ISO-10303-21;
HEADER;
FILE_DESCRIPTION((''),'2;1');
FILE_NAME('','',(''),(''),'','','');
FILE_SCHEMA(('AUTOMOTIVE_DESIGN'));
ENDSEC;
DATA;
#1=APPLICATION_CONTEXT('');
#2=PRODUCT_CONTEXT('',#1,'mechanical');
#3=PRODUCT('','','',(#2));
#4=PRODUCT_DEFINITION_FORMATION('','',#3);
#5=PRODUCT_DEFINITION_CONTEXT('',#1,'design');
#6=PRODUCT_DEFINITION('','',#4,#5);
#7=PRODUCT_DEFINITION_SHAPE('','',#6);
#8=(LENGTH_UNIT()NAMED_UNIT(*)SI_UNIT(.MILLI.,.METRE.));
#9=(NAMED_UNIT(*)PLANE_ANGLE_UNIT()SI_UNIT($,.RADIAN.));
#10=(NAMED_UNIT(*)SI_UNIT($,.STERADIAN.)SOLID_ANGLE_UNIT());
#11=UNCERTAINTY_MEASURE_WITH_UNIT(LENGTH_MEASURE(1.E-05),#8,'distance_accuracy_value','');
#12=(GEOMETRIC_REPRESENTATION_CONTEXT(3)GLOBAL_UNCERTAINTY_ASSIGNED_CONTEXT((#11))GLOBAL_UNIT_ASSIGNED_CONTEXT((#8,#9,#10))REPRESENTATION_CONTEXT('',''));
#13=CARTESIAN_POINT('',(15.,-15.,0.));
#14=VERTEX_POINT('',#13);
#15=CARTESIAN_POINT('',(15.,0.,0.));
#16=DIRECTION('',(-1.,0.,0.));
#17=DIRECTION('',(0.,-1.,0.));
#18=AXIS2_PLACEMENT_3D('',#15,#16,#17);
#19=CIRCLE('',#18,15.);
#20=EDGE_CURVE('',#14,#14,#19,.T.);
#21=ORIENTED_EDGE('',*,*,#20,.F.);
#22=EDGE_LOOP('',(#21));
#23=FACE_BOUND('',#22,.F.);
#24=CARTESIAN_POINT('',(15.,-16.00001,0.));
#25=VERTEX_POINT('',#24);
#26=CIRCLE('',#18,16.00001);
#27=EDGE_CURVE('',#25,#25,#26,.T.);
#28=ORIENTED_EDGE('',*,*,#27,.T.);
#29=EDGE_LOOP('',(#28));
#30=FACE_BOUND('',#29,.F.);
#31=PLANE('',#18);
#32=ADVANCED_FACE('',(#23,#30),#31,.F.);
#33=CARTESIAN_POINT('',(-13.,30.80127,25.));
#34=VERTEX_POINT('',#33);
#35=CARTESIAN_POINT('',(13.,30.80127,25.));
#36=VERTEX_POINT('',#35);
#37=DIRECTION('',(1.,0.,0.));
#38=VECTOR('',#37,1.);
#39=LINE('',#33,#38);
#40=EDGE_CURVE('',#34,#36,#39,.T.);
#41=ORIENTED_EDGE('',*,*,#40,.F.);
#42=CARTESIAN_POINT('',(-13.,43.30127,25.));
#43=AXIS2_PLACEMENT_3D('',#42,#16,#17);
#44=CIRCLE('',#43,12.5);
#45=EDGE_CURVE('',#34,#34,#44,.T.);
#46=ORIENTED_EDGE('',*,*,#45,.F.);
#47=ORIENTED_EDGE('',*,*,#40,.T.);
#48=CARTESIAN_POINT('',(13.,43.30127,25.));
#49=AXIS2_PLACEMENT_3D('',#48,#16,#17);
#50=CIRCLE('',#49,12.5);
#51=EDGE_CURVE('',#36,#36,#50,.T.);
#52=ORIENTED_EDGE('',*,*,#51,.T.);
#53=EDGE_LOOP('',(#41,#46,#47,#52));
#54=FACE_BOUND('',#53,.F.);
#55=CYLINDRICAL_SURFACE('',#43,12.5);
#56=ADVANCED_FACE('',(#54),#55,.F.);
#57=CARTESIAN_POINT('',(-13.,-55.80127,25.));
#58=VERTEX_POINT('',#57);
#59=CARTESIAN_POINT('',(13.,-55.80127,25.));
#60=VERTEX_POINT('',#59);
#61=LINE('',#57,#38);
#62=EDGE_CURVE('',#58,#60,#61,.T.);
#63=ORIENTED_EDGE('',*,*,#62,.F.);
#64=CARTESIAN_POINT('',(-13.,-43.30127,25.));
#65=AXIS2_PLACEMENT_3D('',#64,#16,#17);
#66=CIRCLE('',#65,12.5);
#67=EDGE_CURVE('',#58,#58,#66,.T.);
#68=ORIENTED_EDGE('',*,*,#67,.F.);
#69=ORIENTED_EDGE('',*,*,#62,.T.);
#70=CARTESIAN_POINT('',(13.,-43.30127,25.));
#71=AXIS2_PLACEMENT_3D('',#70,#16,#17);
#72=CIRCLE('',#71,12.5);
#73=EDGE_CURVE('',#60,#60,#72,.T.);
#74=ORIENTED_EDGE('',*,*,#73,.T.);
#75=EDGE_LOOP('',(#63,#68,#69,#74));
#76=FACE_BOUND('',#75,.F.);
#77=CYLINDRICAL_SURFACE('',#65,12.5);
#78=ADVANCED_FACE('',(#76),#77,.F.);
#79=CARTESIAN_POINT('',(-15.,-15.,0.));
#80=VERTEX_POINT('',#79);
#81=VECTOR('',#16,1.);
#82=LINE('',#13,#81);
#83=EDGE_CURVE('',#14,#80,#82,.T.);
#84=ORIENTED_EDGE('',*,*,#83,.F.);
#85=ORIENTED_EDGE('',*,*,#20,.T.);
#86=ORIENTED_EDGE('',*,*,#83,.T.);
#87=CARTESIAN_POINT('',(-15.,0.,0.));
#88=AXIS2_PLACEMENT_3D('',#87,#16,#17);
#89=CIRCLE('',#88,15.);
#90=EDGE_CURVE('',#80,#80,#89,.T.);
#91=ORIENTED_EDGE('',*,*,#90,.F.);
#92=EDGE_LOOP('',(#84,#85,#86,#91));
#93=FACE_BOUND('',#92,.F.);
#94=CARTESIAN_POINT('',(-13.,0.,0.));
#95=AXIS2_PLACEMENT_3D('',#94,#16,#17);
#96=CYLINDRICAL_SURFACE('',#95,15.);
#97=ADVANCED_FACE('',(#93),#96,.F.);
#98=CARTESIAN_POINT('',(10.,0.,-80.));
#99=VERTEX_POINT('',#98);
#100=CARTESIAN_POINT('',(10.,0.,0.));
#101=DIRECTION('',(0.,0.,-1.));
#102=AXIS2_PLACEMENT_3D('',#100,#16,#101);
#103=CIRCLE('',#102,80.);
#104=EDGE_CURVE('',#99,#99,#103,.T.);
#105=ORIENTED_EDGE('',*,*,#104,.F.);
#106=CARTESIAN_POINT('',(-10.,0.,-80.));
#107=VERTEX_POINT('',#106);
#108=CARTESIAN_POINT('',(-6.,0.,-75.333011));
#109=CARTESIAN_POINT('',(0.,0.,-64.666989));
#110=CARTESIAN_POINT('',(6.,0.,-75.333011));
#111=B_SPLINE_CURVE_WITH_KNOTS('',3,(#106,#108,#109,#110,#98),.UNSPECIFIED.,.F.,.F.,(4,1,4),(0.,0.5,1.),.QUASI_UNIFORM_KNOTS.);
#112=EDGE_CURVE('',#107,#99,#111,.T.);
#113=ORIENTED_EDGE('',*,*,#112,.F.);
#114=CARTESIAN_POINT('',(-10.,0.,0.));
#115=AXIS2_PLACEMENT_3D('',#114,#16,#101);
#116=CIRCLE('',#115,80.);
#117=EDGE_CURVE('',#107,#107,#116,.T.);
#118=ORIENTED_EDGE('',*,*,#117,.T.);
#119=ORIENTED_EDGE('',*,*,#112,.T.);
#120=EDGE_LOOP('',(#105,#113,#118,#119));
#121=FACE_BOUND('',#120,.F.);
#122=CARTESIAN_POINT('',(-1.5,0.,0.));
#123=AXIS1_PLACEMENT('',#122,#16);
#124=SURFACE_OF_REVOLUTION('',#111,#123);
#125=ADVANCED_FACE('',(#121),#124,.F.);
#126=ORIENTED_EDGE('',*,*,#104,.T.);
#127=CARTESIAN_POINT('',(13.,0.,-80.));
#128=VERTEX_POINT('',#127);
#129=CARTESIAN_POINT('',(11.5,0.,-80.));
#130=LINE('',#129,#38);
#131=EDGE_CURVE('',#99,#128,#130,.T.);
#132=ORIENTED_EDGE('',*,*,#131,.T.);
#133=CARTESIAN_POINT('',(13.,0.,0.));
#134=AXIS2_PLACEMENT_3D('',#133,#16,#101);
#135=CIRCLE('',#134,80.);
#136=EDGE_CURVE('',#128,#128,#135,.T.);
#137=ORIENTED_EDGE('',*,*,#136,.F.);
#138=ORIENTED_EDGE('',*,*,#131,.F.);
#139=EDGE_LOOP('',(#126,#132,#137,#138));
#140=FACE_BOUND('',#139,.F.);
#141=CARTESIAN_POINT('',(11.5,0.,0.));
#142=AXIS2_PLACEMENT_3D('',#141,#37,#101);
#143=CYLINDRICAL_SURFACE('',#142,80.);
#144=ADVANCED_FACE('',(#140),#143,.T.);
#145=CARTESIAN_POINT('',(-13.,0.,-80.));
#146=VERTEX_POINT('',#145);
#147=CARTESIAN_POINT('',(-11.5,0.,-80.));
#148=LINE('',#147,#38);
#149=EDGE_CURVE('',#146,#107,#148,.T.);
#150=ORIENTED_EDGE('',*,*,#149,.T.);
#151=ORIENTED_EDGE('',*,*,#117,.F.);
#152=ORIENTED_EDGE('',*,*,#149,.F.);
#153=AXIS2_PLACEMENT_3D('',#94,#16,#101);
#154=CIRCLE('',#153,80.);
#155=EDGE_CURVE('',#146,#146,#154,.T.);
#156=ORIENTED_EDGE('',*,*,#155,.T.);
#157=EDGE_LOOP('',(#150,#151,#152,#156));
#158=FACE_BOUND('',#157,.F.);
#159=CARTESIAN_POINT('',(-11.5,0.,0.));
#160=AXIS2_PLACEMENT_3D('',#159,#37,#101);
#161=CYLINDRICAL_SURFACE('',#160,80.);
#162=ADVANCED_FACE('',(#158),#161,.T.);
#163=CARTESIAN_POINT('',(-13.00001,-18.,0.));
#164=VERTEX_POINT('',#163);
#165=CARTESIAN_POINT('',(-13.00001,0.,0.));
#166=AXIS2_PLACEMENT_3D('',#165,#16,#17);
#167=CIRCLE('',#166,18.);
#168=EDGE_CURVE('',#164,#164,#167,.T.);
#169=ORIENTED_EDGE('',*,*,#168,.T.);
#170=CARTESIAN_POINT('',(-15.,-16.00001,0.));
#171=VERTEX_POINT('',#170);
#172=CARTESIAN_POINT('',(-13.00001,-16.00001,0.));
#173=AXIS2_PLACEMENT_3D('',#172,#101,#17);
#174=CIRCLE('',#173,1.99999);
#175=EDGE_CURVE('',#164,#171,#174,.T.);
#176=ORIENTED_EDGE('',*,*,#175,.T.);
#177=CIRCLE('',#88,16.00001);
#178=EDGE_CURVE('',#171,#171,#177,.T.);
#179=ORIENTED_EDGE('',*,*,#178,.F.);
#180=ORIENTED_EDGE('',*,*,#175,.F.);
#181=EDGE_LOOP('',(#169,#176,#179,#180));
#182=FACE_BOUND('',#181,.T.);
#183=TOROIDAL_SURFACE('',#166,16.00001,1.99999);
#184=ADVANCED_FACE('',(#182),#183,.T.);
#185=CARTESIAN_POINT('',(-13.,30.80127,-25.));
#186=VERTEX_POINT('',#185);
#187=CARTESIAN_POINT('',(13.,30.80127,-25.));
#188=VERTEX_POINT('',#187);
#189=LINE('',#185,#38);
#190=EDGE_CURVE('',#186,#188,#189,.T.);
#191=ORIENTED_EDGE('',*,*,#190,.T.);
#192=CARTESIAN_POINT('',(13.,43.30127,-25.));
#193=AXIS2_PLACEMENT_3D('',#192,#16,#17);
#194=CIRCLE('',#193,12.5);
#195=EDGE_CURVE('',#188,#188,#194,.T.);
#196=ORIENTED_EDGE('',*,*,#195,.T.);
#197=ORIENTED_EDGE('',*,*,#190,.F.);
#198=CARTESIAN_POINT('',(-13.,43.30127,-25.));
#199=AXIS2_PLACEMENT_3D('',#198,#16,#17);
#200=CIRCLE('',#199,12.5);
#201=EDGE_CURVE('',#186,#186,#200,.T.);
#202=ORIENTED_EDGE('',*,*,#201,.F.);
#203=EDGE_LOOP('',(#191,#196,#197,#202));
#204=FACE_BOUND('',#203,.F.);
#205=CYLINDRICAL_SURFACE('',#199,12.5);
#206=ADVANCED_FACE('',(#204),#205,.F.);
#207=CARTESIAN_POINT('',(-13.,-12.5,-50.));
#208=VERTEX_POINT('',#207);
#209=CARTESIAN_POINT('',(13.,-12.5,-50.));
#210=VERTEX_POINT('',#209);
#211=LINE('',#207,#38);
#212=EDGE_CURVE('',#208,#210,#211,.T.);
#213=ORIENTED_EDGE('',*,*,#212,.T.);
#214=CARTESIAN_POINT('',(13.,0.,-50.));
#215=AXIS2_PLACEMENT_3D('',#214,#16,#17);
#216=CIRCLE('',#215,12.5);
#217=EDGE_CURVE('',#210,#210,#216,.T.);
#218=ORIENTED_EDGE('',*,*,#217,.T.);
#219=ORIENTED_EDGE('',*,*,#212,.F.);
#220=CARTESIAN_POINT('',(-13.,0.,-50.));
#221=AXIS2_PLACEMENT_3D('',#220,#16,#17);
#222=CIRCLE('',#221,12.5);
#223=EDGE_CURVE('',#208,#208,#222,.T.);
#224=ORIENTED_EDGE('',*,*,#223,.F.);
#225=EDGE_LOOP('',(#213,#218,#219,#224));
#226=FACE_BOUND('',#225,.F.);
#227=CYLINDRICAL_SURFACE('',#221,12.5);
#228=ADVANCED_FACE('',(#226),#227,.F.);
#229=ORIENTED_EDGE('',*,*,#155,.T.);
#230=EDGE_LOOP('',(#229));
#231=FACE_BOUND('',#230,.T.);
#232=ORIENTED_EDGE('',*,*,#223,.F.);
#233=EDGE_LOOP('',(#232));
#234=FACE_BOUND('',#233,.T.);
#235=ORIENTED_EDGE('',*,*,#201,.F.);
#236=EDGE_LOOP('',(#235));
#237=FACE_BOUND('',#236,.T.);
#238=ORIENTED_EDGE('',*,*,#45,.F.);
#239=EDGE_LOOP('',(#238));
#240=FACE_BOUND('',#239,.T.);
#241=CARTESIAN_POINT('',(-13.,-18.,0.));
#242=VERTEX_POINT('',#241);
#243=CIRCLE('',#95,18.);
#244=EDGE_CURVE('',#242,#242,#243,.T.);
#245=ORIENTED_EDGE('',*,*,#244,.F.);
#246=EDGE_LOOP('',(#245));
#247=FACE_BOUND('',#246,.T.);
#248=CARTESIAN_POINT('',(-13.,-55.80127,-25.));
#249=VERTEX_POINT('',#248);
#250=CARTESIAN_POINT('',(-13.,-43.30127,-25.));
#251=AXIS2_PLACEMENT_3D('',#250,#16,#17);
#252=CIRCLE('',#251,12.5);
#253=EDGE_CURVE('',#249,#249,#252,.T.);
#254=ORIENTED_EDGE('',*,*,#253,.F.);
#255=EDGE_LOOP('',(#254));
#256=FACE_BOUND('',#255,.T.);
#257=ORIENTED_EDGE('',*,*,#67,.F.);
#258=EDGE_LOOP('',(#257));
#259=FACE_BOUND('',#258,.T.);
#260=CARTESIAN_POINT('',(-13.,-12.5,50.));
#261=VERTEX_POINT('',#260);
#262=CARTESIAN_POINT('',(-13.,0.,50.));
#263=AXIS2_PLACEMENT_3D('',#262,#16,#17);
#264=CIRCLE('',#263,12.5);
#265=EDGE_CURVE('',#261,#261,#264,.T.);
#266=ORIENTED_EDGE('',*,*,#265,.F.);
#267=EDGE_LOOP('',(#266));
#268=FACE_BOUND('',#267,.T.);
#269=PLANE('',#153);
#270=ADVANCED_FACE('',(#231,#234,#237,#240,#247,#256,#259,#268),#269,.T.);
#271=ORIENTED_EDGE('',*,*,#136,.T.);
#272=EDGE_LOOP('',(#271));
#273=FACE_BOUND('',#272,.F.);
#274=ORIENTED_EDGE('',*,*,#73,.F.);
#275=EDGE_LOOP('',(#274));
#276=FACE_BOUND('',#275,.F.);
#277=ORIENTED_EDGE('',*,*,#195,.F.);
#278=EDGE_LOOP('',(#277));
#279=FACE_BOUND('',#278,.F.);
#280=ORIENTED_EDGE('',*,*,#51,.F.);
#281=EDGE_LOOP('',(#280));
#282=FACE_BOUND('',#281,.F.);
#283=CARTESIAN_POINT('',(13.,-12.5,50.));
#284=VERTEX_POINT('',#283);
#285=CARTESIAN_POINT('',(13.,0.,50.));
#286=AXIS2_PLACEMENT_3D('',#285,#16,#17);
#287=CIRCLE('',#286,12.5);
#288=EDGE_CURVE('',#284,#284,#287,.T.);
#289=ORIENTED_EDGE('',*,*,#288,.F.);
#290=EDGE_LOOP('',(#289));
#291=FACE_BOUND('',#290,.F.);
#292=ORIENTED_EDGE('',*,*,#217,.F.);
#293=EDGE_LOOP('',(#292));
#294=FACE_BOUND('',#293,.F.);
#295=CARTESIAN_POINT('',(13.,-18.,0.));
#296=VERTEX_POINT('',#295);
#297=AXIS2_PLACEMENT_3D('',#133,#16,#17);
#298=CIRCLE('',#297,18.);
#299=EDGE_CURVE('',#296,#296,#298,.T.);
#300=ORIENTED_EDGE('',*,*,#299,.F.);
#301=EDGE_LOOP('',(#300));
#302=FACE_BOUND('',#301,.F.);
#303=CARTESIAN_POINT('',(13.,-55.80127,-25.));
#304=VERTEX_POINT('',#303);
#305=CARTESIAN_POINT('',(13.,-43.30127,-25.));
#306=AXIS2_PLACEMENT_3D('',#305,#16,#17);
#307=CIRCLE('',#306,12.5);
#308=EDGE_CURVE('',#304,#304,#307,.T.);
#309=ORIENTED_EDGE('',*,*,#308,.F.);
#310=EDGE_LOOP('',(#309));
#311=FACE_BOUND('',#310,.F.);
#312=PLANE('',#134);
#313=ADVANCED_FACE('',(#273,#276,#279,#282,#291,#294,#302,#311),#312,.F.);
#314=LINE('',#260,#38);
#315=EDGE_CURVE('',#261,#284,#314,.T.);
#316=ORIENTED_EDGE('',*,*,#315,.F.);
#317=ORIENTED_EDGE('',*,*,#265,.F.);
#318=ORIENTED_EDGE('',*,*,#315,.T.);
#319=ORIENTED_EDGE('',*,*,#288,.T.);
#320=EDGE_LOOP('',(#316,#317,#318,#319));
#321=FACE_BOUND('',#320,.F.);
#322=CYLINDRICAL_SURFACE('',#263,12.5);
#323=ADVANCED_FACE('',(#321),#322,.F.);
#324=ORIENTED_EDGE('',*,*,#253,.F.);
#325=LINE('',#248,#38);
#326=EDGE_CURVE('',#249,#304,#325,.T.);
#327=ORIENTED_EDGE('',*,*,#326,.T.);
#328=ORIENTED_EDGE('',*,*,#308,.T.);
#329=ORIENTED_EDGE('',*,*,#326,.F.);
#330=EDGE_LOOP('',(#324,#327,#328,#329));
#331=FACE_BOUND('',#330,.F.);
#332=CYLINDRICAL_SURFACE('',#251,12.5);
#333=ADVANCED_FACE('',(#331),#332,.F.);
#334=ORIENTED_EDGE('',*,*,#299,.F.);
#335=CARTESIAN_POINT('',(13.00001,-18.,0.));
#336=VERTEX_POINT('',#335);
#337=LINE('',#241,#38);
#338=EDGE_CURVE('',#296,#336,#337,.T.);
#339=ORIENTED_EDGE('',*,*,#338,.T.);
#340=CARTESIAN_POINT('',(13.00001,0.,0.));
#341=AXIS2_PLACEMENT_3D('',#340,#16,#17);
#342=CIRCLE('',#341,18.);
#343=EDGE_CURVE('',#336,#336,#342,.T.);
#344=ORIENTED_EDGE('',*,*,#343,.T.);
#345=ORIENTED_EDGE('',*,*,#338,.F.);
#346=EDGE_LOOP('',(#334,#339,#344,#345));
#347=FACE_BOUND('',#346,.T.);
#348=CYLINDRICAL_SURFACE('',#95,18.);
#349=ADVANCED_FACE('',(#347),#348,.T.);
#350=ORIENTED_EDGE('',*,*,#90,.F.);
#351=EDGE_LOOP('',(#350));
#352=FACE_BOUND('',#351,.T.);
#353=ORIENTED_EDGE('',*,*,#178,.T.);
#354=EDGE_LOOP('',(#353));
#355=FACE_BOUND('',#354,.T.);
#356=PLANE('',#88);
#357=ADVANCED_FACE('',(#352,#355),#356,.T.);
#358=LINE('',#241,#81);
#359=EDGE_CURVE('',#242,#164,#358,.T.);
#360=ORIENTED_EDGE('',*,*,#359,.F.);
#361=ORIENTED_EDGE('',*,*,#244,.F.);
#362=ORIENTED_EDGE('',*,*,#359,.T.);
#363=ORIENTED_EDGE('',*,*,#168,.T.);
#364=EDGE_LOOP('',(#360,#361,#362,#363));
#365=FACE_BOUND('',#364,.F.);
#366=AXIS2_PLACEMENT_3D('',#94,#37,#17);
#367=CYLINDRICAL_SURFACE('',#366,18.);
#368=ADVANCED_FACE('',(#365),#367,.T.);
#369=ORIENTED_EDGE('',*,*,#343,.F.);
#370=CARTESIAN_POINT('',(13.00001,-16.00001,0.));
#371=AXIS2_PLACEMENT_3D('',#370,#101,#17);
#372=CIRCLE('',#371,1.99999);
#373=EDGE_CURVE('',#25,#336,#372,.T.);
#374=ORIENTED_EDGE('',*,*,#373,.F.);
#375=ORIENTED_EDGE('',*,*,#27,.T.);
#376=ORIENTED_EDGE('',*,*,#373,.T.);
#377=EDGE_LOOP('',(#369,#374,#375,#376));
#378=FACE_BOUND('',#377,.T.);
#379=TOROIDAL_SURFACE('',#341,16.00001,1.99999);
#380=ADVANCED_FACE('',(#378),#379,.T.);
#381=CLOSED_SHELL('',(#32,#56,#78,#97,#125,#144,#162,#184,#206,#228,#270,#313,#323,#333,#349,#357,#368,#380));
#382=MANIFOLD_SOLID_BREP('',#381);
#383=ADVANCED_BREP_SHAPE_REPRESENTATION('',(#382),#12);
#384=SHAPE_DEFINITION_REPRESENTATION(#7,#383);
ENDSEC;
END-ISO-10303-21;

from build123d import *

# Parameters (mm, degrees)
F0_W          = 3
F0_H          = 80
F2_R          = 12.5
F3_DEPTH      = 119.80777
F4_R          = 15
F5_DEPTH      = 102.88035
F4_R_2        = 18
F6_DEPTH      = 2
F6_DEPTH_BACK = 28
F7_R          = 1.99999


# Not quite as in the source:
# - a fillet or chamfer is up to 0.001 mm smaller than in the source, because OpenCascade refuses the exact size


with BuildPart() as f1:
    # F0 (on Front) → F1 (revolve)
    with BuildSketch(Plane.XZ):
        with Locations((11.5, -40)):
            Rectangle(F0_W, F0_H)
        with BuildLine():
            Line((10, -80), (10, 0))
            Line((10, 0), (0, 0))
            Line((0, 0), (-10, 0))
            Line((-10, 0), (-10, -80))
            add(Edge.make_bspline(
                [(-10, -80), (-6, -75.3330111863), (0, -64.6669888505), (6, -75.3330111128), (10, -80)],
                knots=[0, 0, 0, 0, 0.5, 1, 1, 1, 1], degree=3))
        make_face()
        with Locations((-11.5, -40)):
            Rectangle(F0_W, F0_H)
    revolve(axis=Axis((-1.5, 0, 0), (-1, 0, 0)))

    # F2 (on face) → F3 (cut)
    with BuildSketch(Plane(origin=(-13, 0, 0), x_dir=(0, -1, 0), z_dir=(-1, 0, 0))):
        with Locations((-43.3012701892, 25)):
            Circle(F2_R)
        with Locations((43.3012701892, 25)):
            Circle(F2_R)
        with Locations((43.3012701892, -25)):
            Circle(F2_R)
        with Locations((0, -50)):
            Circle(F2_R)
        with Locations((-43.3012701892, -25)):
            Circle(F2_R)
        with Locations((0, 50)):
            Circle(F2_R)
    extrude(amount=-F3_DEPTH, mode=Mode.SUBTRACT)

    # F4 (on face) → F5 (cut)
    with BuildSketch(Plane(origin=(-13, 0, 0), x_dir=(0, -1, 0), z_dir=(-1, 0, 0))):
        Circle(F4_R)
    extrude(amount=-F5_DEPTH, mode=Mode.SUBTRACT)

    # F4 (on face) → F6 (join, two sides)
    with BuildSketch(Plane(origin=(-13, 0, 0), x_dir=(0, -1, 0), z_dir=(-1, 0, 0))) as f6_sk:
        Circle(F4_R_2)
        Circle(F4_R, mode=Mode.SUBTRACT)
    extrude(amount=F6_DEPTH)
    extrude(f6_sk.sketch, amount=-F6_DEPTH_BACK)

    # F7 (radius 2 in the source; OpenCascade refuses exactly that, so slightly less here)
    f7_edges = [f1.edges().sort_by_distance(p)[0] for p in [
        (-15, 18, 0),
        (15, 18, 0),
    ]]
    fillet(f7_edges, radius=F7_R)


solid = f1.part
